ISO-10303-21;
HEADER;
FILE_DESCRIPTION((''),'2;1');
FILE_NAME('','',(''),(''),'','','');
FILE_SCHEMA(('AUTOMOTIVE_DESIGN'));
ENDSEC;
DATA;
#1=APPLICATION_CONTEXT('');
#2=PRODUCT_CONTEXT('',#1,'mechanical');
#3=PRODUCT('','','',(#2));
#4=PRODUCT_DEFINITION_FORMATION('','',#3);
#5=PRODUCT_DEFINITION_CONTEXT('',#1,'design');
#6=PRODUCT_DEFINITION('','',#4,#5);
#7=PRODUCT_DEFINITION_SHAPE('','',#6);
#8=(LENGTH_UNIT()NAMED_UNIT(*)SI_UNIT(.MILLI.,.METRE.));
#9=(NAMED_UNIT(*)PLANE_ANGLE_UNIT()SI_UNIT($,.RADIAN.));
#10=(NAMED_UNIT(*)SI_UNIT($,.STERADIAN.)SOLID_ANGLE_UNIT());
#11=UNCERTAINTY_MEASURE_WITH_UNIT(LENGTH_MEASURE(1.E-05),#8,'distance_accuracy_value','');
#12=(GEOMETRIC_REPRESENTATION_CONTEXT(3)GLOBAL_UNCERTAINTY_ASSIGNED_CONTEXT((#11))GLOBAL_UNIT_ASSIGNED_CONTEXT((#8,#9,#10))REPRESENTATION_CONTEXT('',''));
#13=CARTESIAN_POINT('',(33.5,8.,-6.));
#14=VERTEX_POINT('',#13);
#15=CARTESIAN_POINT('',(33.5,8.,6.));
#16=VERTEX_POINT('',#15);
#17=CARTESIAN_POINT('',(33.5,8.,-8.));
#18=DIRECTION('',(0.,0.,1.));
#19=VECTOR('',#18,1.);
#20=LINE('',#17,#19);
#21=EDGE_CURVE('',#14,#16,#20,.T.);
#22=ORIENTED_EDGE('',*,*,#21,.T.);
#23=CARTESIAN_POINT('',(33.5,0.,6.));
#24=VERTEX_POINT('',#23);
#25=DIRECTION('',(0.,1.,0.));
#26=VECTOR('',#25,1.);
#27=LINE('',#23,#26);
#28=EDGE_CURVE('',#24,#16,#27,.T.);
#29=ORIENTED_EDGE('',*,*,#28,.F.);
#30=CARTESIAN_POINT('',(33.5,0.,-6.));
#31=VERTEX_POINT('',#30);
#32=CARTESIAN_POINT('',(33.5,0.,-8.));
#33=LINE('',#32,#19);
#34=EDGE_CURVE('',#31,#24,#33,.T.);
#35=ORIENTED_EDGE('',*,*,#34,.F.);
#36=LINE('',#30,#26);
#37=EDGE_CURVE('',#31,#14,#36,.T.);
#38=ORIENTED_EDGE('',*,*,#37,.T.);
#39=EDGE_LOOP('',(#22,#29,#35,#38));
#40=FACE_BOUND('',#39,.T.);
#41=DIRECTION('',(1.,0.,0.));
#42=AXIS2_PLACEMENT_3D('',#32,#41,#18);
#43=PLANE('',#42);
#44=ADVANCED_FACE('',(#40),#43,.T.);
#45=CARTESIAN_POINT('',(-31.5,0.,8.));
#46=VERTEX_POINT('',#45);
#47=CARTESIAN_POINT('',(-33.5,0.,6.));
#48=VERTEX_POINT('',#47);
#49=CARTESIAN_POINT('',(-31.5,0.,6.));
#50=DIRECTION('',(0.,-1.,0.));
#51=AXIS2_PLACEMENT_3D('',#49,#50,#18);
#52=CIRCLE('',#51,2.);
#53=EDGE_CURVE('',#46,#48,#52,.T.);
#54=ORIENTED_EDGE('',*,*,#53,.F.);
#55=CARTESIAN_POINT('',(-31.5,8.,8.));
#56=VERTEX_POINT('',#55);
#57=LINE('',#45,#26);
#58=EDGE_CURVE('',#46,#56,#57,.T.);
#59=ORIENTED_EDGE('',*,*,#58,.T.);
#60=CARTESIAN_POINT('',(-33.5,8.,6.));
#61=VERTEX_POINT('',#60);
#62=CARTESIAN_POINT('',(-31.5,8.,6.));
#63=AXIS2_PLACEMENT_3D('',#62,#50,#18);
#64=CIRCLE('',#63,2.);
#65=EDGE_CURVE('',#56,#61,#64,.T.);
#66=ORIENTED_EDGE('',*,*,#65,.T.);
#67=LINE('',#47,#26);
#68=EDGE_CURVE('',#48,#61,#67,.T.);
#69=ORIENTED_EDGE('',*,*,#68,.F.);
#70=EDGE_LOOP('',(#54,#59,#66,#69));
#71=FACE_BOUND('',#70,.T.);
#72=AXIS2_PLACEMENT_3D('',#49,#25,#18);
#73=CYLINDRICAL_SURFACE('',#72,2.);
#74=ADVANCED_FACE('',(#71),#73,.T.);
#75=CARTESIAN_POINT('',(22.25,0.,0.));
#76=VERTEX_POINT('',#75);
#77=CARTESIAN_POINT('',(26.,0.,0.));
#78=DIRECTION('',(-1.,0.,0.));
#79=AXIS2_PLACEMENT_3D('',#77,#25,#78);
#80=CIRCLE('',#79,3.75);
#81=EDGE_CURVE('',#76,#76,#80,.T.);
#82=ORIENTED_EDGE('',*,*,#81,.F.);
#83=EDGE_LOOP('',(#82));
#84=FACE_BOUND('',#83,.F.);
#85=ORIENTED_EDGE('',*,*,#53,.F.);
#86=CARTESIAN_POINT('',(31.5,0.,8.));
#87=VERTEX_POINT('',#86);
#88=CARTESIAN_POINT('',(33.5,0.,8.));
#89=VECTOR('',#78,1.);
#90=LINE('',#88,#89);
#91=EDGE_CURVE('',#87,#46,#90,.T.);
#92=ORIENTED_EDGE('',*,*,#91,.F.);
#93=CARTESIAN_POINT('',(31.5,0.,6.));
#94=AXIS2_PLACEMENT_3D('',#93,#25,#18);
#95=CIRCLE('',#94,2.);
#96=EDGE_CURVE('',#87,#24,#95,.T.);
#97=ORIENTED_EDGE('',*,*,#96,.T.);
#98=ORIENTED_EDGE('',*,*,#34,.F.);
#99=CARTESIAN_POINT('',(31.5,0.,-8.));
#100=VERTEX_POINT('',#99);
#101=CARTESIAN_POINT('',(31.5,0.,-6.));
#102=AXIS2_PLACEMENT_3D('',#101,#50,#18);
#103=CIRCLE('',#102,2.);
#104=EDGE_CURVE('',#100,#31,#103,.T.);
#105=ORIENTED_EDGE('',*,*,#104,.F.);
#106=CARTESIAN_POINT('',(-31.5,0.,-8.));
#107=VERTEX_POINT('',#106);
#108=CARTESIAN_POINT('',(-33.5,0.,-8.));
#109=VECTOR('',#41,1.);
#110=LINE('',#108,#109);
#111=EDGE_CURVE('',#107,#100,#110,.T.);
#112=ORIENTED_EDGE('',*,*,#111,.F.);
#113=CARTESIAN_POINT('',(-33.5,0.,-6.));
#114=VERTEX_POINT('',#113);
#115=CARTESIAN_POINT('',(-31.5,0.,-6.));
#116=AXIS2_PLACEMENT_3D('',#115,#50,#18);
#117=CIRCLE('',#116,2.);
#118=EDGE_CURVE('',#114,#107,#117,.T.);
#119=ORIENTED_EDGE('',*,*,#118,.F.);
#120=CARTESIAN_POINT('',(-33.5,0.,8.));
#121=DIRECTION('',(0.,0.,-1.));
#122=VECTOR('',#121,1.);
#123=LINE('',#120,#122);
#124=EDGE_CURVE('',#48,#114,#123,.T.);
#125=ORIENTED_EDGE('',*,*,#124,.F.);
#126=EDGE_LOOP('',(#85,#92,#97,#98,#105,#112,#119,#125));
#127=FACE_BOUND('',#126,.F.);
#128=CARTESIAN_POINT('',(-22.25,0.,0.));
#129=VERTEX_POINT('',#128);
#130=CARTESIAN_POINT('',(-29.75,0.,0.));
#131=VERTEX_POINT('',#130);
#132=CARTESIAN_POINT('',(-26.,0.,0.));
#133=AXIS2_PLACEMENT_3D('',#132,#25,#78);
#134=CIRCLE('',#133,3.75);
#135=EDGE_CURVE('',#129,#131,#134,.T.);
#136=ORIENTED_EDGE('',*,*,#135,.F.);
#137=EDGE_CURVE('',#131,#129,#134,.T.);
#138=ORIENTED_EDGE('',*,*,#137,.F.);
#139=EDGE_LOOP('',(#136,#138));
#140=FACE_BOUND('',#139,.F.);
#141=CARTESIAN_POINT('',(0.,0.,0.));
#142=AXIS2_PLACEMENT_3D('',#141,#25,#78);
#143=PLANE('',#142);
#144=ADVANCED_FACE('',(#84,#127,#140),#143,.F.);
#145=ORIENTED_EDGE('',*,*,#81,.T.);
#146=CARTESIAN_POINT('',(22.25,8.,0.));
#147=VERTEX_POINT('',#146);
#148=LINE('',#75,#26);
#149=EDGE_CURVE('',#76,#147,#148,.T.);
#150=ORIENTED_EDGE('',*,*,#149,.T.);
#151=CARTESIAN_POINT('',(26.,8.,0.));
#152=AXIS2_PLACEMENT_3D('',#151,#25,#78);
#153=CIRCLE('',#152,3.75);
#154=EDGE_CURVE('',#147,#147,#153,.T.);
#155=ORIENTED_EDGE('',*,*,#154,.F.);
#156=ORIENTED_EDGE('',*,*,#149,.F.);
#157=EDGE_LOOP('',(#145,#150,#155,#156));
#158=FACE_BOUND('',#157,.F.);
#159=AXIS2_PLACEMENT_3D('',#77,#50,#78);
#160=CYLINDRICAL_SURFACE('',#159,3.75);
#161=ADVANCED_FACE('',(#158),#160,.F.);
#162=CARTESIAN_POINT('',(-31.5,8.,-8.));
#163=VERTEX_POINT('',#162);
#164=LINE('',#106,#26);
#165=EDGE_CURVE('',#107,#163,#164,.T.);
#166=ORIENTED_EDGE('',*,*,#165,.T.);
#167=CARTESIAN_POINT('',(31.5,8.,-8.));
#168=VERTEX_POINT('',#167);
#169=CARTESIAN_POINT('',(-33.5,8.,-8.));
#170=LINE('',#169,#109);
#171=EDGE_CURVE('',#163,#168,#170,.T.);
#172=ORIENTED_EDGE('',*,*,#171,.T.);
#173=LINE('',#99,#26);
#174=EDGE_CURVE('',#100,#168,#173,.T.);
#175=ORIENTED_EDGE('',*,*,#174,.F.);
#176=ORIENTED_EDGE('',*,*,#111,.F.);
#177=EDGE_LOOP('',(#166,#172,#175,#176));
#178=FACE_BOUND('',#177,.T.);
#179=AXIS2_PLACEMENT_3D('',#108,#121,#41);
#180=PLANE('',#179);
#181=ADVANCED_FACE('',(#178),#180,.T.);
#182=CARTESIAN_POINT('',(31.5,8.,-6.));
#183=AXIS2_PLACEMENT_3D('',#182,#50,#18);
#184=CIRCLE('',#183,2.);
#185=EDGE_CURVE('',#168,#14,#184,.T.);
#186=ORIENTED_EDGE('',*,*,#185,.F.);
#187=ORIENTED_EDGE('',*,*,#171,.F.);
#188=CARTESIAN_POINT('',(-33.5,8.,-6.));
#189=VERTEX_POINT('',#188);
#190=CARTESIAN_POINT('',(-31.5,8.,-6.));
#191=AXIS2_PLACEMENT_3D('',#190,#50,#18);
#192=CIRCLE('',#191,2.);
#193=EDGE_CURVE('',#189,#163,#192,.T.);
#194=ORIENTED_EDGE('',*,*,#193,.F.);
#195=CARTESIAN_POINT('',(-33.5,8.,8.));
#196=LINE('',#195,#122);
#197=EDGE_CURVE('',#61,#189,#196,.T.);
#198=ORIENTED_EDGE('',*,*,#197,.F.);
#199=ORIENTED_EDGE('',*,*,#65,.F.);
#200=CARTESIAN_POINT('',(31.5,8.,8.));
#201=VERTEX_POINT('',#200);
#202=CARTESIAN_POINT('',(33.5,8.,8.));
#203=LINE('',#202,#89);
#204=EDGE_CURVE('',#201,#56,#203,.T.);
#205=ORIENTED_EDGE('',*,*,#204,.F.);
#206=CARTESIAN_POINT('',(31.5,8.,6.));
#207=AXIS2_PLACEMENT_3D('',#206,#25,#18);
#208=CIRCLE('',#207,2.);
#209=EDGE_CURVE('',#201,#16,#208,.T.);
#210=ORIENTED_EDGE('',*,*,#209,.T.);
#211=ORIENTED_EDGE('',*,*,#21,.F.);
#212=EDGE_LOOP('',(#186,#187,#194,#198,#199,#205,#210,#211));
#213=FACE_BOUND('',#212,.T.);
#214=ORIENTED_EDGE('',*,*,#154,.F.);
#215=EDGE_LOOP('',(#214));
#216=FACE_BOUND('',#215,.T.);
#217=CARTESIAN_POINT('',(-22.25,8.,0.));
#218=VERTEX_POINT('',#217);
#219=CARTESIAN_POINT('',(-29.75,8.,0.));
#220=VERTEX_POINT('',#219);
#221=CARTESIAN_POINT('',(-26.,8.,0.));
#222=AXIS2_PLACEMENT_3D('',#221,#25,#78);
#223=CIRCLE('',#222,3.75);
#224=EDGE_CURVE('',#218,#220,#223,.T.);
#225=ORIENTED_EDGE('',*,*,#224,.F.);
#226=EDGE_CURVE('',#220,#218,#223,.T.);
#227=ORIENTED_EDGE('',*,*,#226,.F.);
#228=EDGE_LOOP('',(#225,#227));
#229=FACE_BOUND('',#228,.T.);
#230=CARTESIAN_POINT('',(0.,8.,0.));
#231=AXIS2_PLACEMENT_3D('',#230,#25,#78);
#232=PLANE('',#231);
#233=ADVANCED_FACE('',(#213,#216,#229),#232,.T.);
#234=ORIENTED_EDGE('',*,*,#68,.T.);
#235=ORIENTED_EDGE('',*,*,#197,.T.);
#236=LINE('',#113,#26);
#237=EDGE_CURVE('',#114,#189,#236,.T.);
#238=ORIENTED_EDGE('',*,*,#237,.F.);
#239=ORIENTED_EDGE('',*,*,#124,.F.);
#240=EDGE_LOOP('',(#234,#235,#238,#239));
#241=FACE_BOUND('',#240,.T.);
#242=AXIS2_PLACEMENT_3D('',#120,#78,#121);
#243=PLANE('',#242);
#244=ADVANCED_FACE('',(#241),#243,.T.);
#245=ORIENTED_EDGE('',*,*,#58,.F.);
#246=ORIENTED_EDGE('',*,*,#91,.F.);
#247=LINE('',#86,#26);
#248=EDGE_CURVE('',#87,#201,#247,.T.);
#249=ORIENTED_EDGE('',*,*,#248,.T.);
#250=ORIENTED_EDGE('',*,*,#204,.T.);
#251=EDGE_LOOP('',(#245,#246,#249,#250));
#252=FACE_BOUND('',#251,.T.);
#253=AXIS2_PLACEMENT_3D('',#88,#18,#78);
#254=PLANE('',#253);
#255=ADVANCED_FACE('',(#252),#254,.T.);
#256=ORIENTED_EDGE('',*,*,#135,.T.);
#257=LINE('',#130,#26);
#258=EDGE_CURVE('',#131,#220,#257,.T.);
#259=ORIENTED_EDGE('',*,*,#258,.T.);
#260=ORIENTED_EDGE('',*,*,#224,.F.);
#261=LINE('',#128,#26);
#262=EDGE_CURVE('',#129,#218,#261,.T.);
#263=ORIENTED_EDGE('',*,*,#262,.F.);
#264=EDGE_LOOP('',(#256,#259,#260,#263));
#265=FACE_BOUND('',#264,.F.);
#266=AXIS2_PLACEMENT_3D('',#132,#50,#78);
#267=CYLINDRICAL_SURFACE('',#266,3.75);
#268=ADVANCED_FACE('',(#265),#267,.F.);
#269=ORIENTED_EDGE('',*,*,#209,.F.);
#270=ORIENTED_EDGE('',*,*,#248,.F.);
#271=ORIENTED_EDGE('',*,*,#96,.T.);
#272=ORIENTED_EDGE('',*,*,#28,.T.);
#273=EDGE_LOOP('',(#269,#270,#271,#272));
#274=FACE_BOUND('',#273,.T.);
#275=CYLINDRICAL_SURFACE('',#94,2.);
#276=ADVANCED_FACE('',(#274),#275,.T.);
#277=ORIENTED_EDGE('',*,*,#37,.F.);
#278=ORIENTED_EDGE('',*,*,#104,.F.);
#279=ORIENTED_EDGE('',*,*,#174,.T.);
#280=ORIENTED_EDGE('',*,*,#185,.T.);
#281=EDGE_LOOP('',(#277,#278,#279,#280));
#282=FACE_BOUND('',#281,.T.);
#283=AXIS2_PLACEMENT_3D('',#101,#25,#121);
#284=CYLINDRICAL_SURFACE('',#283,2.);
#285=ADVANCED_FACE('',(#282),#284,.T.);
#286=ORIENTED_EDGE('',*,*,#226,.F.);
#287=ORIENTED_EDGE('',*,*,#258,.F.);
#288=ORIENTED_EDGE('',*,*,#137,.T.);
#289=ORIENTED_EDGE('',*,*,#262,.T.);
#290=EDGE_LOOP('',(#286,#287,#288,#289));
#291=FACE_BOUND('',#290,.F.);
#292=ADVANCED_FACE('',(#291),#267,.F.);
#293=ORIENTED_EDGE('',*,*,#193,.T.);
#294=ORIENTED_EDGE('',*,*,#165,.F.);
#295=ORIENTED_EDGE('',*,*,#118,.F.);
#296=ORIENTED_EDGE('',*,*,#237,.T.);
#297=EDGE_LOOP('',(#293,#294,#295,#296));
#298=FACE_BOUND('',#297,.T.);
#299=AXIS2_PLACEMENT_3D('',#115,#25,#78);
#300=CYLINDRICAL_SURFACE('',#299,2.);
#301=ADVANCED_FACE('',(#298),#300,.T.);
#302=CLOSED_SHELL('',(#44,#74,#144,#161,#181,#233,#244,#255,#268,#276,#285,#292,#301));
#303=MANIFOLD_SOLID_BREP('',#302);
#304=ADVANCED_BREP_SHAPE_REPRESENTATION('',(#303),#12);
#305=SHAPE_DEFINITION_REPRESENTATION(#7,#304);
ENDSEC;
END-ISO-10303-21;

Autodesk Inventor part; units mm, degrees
ref_plane "YZ Plane" through (0, 0, 0) normal (1, 0, 0) x (0, 1, 0)
ref_plane "XZ Plane" through (0, 0, 0) normal (0, 1, 0) x (-1, 0, 0)
ref_plane "XY Plane" through (0, 0, 0) normal (0, 0, 1) x (1, 0, 0)
sketch "Sketch1" plane through (0, 0, 0) normal (0, 1, 0) x (-1, 0, 0)
  line L0 (-33.5, 8) -> (33.5, 8)
  line L1 (33.5, 8) -> (33.5, -8)
  line L2 (33.5, -8) -> (-33.5, -8)
  line L3 (-33.5, -8) -> (-33.5, 8)
  line L4 (-33.5, 8) -> (33.5, -8) construction
  line L5 (33.5, 8) -> (-33.5, -8) construction
  line L6 (46.9, 0) -> (-46.9, 0) construction
  line L7 (0, -11.2) -> (0, 11.2) construction
  line L8 (26, 0) -> (-26, 0)
  circle A0 centre (26, 0) radius 3.75
  circle A1 centre (-26, 0) radius 3.75
  point P0 (0, 0)
  dimension "d0" = 16
  dimension "d1" = 67
  dimension "d2" = 52
  dimension "d3" = 7.5
extrude "Extrusion1" add sketch "Sketch1" along normal blind 8
fillet "Fillet1" radius 2 4 edges at (33.5, 4, 8) (-33.5, 4, 8) (-33.5, 4, -8) (33.5, 4, -8)
properties part number "07_Mieng_go_bu_67x16" material "Laminated Veneer Lumber"
